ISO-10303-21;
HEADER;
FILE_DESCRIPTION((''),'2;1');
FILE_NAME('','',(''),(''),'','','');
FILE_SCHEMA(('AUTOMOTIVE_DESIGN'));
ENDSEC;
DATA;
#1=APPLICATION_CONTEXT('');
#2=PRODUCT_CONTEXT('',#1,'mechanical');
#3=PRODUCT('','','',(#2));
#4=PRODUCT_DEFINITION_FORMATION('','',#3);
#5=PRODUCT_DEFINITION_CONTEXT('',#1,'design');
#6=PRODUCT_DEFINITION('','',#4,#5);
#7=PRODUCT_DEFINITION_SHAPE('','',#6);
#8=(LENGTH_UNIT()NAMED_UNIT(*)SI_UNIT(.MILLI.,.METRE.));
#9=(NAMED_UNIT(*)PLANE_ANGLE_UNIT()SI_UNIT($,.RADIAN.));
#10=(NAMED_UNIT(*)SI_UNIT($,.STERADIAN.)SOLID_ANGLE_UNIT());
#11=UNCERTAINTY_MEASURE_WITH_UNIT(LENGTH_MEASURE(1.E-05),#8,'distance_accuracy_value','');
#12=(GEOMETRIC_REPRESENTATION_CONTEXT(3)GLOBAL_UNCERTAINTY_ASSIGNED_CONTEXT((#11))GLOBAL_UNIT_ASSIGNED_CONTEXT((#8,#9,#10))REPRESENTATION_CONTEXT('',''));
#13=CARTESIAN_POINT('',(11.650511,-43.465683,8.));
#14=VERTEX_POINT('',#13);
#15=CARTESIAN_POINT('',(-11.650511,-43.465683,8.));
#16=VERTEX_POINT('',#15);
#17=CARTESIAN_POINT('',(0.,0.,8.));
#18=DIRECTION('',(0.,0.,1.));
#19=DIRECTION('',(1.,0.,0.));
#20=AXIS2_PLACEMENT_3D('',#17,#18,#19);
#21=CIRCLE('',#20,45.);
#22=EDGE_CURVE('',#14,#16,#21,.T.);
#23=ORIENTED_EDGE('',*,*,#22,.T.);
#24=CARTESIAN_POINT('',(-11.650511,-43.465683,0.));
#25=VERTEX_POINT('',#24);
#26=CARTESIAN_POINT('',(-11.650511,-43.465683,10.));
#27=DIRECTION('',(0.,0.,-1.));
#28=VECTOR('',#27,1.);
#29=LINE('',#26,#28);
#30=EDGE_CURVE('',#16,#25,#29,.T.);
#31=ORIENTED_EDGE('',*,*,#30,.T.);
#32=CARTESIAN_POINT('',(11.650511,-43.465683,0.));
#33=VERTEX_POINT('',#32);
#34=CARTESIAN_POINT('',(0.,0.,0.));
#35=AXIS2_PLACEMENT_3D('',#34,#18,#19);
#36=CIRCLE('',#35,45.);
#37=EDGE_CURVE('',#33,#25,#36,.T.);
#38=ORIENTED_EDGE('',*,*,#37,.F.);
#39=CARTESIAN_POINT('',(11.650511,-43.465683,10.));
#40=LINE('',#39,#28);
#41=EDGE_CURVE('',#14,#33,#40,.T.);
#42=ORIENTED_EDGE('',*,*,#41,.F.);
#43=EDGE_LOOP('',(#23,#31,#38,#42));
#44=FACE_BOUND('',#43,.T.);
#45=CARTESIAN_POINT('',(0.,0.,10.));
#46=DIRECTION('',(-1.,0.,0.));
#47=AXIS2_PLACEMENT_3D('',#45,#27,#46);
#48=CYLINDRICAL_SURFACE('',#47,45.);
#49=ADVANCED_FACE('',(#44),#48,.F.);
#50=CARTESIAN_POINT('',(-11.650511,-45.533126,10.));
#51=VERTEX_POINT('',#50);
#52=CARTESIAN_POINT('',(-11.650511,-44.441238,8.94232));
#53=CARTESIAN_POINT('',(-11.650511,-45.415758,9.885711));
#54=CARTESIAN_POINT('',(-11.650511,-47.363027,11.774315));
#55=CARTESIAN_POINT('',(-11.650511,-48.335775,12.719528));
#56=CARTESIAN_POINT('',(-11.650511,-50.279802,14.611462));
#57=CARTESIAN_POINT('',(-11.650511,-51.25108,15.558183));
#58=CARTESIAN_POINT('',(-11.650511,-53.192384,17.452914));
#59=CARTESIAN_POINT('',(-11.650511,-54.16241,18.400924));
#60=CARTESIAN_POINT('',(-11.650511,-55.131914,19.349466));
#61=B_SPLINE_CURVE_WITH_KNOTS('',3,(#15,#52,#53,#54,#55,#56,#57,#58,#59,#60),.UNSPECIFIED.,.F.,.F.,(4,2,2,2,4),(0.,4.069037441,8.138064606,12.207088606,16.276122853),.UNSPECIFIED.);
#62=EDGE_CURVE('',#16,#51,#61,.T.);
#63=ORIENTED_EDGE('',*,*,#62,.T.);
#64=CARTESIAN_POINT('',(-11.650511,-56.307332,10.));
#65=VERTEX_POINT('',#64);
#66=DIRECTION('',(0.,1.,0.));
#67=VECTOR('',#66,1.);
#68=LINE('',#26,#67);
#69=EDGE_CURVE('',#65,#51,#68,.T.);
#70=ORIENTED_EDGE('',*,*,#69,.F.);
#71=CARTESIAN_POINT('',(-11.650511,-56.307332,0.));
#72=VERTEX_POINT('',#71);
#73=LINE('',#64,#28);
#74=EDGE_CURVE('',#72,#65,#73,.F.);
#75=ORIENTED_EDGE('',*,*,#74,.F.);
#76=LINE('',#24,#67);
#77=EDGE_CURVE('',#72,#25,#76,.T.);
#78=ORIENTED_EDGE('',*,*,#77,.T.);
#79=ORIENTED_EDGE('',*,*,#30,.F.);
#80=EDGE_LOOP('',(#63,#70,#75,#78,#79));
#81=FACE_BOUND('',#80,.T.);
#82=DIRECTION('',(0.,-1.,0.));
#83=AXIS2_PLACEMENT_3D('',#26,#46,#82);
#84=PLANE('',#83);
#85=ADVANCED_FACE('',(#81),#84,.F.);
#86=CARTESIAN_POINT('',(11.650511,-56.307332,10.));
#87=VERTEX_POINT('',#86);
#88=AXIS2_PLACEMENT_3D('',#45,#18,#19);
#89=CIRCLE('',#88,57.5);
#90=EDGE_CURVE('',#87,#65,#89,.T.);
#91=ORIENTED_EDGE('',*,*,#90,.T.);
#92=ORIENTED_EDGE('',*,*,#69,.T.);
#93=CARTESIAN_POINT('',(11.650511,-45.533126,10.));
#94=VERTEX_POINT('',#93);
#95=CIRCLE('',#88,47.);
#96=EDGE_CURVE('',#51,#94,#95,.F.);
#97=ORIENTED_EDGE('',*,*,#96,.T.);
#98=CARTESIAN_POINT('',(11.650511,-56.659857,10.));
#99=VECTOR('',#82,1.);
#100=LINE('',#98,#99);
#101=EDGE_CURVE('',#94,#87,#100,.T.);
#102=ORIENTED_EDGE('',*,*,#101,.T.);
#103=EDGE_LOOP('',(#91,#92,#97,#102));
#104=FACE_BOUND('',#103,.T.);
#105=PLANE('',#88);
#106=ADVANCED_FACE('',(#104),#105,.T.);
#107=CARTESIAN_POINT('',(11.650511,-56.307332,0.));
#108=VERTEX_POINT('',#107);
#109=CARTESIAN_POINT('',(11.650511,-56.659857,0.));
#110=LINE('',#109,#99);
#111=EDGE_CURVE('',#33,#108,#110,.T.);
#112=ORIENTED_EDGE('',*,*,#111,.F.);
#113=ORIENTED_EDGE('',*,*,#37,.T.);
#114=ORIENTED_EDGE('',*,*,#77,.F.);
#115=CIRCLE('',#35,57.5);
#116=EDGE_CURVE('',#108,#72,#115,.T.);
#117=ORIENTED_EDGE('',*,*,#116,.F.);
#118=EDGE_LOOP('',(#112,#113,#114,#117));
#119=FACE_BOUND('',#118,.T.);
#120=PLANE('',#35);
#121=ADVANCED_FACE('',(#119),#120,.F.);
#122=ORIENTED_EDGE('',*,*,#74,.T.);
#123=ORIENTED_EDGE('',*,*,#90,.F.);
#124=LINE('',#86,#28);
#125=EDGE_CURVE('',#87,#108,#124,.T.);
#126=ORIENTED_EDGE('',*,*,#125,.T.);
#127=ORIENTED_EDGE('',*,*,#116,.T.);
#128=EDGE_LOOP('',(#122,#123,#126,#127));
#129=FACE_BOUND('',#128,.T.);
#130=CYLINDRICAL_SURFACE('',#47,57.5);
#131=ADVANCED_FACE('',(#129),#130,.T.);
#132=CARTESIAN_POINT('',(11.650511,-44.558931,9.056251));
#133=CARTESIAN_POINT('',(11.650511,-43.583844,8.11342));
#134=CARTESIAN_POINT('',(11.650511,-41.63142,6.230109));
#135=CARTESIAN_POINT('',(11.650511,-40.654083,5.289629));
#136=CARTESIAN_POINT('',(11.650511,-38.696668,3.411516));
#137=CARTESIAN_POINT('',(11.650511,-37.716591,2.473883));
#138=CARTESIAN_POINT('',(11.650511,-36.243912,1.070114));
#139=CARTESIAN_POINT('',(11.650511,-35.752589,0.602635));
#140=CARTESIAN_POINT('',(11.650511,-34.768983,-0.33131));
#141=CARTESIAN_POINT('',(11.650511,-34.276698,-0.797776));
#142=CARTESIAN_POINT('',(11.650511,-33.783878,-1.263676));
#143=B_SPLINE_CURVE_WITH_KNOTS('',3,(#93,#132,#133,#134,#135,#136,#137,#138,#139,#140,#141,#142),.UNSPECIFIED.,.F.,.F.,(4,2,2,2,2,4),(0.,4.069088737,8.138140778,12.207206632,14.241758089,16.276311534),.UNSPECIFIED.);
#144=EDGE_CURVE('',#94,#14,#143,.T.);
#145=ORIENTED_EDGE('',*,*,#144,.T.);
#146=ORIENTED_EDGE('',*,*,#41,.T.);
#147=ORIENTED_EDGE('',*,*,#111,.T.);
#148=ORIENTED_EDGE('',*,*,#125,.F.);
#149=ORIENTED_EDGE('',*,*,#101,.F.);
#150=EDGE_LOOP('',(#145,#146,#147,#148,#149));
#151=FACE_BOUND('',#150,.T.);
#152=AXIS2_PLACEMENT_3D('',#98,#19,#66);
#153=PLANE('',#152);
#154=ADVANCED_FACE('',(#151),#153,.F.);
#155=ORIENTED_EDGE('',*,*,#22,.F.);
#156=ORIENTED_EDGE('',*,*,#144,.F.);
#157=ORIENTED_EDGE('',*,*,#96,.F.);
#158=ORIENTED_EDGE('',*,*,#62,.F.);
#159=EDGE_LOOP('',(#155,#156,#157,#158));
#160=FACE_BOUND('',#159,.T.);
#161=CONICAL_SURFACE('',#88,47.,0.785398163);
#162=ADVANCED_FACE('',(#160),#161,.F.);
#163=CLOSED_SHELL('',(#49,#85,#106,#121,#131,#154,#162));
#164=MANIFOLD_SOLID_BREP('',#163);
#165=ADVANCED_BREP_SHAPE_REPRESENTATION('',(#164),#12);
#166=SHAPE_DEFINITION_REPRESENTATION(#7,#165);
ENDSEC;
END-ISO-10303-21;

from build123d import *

# Parameters (mm, degrees)
SKETCH1_R           = 57.5
SKETCH1_R_2         = 45
BOSS_EXTRUDE1_DEPTH = 10
CUT_EXTRUDE2_DEPTH  = 10
CHAMFER1_SIZE       = 2


with BuildPart() as part:
    # Sketch1 → Boss-Extrude1 (new body)
    with BuildSketch(Plane(origin=(0, 0, 0), x_dir=(0, 1, 0), z_dir=(0, 0, 1))):
        Circle(SKETCH1_R)
        Circle(SKETCH1_R_2, mode=Mode.SUBTRACT)
    extrude(amount=BOSS_EXTRUDE1_DEPTH)

    # Sketch2 → Cut-Extrude2 (cut)
    with BuildSketch(Plane(origin=(0, 0, 0), x_dir=(1, 0, 0), z_dir=(0, 0, -1))):
        with BuildLine():
            Line((11.650511373, 56.659857386), (11.650511373, 43.46568284))
            add(Edge.make_bspline(
                [(11.650511373, 43.46568284), (-0.679246558, 46.406413024), (-11.650511373, 43.46568284)],
                knots=[0, 0, 0, 0.575547458, 0.575547458, 0.575547458], degree=2))
            Line((-11.650511373, 43.46568284), (-11.650511373, 56.659857386))
            ThreePointArc((-11.650511373, 56.659857386), (0, 57.845257837), (11.650511373, 56.659857386))
        make_face()
    extrude(amount=-CUT_EXTRUDE2_DEPTH, mode=Mode.SUBTRACT)

    # Chamfer1
    chamfer1_edges = [part.edges().sort_by_distance(p)[0] for p in [
        (0, 45, 10),
    ]]
    chamfer(chamfer1_edges, length=CHAMFER1_SIZE)


solid = part.part
